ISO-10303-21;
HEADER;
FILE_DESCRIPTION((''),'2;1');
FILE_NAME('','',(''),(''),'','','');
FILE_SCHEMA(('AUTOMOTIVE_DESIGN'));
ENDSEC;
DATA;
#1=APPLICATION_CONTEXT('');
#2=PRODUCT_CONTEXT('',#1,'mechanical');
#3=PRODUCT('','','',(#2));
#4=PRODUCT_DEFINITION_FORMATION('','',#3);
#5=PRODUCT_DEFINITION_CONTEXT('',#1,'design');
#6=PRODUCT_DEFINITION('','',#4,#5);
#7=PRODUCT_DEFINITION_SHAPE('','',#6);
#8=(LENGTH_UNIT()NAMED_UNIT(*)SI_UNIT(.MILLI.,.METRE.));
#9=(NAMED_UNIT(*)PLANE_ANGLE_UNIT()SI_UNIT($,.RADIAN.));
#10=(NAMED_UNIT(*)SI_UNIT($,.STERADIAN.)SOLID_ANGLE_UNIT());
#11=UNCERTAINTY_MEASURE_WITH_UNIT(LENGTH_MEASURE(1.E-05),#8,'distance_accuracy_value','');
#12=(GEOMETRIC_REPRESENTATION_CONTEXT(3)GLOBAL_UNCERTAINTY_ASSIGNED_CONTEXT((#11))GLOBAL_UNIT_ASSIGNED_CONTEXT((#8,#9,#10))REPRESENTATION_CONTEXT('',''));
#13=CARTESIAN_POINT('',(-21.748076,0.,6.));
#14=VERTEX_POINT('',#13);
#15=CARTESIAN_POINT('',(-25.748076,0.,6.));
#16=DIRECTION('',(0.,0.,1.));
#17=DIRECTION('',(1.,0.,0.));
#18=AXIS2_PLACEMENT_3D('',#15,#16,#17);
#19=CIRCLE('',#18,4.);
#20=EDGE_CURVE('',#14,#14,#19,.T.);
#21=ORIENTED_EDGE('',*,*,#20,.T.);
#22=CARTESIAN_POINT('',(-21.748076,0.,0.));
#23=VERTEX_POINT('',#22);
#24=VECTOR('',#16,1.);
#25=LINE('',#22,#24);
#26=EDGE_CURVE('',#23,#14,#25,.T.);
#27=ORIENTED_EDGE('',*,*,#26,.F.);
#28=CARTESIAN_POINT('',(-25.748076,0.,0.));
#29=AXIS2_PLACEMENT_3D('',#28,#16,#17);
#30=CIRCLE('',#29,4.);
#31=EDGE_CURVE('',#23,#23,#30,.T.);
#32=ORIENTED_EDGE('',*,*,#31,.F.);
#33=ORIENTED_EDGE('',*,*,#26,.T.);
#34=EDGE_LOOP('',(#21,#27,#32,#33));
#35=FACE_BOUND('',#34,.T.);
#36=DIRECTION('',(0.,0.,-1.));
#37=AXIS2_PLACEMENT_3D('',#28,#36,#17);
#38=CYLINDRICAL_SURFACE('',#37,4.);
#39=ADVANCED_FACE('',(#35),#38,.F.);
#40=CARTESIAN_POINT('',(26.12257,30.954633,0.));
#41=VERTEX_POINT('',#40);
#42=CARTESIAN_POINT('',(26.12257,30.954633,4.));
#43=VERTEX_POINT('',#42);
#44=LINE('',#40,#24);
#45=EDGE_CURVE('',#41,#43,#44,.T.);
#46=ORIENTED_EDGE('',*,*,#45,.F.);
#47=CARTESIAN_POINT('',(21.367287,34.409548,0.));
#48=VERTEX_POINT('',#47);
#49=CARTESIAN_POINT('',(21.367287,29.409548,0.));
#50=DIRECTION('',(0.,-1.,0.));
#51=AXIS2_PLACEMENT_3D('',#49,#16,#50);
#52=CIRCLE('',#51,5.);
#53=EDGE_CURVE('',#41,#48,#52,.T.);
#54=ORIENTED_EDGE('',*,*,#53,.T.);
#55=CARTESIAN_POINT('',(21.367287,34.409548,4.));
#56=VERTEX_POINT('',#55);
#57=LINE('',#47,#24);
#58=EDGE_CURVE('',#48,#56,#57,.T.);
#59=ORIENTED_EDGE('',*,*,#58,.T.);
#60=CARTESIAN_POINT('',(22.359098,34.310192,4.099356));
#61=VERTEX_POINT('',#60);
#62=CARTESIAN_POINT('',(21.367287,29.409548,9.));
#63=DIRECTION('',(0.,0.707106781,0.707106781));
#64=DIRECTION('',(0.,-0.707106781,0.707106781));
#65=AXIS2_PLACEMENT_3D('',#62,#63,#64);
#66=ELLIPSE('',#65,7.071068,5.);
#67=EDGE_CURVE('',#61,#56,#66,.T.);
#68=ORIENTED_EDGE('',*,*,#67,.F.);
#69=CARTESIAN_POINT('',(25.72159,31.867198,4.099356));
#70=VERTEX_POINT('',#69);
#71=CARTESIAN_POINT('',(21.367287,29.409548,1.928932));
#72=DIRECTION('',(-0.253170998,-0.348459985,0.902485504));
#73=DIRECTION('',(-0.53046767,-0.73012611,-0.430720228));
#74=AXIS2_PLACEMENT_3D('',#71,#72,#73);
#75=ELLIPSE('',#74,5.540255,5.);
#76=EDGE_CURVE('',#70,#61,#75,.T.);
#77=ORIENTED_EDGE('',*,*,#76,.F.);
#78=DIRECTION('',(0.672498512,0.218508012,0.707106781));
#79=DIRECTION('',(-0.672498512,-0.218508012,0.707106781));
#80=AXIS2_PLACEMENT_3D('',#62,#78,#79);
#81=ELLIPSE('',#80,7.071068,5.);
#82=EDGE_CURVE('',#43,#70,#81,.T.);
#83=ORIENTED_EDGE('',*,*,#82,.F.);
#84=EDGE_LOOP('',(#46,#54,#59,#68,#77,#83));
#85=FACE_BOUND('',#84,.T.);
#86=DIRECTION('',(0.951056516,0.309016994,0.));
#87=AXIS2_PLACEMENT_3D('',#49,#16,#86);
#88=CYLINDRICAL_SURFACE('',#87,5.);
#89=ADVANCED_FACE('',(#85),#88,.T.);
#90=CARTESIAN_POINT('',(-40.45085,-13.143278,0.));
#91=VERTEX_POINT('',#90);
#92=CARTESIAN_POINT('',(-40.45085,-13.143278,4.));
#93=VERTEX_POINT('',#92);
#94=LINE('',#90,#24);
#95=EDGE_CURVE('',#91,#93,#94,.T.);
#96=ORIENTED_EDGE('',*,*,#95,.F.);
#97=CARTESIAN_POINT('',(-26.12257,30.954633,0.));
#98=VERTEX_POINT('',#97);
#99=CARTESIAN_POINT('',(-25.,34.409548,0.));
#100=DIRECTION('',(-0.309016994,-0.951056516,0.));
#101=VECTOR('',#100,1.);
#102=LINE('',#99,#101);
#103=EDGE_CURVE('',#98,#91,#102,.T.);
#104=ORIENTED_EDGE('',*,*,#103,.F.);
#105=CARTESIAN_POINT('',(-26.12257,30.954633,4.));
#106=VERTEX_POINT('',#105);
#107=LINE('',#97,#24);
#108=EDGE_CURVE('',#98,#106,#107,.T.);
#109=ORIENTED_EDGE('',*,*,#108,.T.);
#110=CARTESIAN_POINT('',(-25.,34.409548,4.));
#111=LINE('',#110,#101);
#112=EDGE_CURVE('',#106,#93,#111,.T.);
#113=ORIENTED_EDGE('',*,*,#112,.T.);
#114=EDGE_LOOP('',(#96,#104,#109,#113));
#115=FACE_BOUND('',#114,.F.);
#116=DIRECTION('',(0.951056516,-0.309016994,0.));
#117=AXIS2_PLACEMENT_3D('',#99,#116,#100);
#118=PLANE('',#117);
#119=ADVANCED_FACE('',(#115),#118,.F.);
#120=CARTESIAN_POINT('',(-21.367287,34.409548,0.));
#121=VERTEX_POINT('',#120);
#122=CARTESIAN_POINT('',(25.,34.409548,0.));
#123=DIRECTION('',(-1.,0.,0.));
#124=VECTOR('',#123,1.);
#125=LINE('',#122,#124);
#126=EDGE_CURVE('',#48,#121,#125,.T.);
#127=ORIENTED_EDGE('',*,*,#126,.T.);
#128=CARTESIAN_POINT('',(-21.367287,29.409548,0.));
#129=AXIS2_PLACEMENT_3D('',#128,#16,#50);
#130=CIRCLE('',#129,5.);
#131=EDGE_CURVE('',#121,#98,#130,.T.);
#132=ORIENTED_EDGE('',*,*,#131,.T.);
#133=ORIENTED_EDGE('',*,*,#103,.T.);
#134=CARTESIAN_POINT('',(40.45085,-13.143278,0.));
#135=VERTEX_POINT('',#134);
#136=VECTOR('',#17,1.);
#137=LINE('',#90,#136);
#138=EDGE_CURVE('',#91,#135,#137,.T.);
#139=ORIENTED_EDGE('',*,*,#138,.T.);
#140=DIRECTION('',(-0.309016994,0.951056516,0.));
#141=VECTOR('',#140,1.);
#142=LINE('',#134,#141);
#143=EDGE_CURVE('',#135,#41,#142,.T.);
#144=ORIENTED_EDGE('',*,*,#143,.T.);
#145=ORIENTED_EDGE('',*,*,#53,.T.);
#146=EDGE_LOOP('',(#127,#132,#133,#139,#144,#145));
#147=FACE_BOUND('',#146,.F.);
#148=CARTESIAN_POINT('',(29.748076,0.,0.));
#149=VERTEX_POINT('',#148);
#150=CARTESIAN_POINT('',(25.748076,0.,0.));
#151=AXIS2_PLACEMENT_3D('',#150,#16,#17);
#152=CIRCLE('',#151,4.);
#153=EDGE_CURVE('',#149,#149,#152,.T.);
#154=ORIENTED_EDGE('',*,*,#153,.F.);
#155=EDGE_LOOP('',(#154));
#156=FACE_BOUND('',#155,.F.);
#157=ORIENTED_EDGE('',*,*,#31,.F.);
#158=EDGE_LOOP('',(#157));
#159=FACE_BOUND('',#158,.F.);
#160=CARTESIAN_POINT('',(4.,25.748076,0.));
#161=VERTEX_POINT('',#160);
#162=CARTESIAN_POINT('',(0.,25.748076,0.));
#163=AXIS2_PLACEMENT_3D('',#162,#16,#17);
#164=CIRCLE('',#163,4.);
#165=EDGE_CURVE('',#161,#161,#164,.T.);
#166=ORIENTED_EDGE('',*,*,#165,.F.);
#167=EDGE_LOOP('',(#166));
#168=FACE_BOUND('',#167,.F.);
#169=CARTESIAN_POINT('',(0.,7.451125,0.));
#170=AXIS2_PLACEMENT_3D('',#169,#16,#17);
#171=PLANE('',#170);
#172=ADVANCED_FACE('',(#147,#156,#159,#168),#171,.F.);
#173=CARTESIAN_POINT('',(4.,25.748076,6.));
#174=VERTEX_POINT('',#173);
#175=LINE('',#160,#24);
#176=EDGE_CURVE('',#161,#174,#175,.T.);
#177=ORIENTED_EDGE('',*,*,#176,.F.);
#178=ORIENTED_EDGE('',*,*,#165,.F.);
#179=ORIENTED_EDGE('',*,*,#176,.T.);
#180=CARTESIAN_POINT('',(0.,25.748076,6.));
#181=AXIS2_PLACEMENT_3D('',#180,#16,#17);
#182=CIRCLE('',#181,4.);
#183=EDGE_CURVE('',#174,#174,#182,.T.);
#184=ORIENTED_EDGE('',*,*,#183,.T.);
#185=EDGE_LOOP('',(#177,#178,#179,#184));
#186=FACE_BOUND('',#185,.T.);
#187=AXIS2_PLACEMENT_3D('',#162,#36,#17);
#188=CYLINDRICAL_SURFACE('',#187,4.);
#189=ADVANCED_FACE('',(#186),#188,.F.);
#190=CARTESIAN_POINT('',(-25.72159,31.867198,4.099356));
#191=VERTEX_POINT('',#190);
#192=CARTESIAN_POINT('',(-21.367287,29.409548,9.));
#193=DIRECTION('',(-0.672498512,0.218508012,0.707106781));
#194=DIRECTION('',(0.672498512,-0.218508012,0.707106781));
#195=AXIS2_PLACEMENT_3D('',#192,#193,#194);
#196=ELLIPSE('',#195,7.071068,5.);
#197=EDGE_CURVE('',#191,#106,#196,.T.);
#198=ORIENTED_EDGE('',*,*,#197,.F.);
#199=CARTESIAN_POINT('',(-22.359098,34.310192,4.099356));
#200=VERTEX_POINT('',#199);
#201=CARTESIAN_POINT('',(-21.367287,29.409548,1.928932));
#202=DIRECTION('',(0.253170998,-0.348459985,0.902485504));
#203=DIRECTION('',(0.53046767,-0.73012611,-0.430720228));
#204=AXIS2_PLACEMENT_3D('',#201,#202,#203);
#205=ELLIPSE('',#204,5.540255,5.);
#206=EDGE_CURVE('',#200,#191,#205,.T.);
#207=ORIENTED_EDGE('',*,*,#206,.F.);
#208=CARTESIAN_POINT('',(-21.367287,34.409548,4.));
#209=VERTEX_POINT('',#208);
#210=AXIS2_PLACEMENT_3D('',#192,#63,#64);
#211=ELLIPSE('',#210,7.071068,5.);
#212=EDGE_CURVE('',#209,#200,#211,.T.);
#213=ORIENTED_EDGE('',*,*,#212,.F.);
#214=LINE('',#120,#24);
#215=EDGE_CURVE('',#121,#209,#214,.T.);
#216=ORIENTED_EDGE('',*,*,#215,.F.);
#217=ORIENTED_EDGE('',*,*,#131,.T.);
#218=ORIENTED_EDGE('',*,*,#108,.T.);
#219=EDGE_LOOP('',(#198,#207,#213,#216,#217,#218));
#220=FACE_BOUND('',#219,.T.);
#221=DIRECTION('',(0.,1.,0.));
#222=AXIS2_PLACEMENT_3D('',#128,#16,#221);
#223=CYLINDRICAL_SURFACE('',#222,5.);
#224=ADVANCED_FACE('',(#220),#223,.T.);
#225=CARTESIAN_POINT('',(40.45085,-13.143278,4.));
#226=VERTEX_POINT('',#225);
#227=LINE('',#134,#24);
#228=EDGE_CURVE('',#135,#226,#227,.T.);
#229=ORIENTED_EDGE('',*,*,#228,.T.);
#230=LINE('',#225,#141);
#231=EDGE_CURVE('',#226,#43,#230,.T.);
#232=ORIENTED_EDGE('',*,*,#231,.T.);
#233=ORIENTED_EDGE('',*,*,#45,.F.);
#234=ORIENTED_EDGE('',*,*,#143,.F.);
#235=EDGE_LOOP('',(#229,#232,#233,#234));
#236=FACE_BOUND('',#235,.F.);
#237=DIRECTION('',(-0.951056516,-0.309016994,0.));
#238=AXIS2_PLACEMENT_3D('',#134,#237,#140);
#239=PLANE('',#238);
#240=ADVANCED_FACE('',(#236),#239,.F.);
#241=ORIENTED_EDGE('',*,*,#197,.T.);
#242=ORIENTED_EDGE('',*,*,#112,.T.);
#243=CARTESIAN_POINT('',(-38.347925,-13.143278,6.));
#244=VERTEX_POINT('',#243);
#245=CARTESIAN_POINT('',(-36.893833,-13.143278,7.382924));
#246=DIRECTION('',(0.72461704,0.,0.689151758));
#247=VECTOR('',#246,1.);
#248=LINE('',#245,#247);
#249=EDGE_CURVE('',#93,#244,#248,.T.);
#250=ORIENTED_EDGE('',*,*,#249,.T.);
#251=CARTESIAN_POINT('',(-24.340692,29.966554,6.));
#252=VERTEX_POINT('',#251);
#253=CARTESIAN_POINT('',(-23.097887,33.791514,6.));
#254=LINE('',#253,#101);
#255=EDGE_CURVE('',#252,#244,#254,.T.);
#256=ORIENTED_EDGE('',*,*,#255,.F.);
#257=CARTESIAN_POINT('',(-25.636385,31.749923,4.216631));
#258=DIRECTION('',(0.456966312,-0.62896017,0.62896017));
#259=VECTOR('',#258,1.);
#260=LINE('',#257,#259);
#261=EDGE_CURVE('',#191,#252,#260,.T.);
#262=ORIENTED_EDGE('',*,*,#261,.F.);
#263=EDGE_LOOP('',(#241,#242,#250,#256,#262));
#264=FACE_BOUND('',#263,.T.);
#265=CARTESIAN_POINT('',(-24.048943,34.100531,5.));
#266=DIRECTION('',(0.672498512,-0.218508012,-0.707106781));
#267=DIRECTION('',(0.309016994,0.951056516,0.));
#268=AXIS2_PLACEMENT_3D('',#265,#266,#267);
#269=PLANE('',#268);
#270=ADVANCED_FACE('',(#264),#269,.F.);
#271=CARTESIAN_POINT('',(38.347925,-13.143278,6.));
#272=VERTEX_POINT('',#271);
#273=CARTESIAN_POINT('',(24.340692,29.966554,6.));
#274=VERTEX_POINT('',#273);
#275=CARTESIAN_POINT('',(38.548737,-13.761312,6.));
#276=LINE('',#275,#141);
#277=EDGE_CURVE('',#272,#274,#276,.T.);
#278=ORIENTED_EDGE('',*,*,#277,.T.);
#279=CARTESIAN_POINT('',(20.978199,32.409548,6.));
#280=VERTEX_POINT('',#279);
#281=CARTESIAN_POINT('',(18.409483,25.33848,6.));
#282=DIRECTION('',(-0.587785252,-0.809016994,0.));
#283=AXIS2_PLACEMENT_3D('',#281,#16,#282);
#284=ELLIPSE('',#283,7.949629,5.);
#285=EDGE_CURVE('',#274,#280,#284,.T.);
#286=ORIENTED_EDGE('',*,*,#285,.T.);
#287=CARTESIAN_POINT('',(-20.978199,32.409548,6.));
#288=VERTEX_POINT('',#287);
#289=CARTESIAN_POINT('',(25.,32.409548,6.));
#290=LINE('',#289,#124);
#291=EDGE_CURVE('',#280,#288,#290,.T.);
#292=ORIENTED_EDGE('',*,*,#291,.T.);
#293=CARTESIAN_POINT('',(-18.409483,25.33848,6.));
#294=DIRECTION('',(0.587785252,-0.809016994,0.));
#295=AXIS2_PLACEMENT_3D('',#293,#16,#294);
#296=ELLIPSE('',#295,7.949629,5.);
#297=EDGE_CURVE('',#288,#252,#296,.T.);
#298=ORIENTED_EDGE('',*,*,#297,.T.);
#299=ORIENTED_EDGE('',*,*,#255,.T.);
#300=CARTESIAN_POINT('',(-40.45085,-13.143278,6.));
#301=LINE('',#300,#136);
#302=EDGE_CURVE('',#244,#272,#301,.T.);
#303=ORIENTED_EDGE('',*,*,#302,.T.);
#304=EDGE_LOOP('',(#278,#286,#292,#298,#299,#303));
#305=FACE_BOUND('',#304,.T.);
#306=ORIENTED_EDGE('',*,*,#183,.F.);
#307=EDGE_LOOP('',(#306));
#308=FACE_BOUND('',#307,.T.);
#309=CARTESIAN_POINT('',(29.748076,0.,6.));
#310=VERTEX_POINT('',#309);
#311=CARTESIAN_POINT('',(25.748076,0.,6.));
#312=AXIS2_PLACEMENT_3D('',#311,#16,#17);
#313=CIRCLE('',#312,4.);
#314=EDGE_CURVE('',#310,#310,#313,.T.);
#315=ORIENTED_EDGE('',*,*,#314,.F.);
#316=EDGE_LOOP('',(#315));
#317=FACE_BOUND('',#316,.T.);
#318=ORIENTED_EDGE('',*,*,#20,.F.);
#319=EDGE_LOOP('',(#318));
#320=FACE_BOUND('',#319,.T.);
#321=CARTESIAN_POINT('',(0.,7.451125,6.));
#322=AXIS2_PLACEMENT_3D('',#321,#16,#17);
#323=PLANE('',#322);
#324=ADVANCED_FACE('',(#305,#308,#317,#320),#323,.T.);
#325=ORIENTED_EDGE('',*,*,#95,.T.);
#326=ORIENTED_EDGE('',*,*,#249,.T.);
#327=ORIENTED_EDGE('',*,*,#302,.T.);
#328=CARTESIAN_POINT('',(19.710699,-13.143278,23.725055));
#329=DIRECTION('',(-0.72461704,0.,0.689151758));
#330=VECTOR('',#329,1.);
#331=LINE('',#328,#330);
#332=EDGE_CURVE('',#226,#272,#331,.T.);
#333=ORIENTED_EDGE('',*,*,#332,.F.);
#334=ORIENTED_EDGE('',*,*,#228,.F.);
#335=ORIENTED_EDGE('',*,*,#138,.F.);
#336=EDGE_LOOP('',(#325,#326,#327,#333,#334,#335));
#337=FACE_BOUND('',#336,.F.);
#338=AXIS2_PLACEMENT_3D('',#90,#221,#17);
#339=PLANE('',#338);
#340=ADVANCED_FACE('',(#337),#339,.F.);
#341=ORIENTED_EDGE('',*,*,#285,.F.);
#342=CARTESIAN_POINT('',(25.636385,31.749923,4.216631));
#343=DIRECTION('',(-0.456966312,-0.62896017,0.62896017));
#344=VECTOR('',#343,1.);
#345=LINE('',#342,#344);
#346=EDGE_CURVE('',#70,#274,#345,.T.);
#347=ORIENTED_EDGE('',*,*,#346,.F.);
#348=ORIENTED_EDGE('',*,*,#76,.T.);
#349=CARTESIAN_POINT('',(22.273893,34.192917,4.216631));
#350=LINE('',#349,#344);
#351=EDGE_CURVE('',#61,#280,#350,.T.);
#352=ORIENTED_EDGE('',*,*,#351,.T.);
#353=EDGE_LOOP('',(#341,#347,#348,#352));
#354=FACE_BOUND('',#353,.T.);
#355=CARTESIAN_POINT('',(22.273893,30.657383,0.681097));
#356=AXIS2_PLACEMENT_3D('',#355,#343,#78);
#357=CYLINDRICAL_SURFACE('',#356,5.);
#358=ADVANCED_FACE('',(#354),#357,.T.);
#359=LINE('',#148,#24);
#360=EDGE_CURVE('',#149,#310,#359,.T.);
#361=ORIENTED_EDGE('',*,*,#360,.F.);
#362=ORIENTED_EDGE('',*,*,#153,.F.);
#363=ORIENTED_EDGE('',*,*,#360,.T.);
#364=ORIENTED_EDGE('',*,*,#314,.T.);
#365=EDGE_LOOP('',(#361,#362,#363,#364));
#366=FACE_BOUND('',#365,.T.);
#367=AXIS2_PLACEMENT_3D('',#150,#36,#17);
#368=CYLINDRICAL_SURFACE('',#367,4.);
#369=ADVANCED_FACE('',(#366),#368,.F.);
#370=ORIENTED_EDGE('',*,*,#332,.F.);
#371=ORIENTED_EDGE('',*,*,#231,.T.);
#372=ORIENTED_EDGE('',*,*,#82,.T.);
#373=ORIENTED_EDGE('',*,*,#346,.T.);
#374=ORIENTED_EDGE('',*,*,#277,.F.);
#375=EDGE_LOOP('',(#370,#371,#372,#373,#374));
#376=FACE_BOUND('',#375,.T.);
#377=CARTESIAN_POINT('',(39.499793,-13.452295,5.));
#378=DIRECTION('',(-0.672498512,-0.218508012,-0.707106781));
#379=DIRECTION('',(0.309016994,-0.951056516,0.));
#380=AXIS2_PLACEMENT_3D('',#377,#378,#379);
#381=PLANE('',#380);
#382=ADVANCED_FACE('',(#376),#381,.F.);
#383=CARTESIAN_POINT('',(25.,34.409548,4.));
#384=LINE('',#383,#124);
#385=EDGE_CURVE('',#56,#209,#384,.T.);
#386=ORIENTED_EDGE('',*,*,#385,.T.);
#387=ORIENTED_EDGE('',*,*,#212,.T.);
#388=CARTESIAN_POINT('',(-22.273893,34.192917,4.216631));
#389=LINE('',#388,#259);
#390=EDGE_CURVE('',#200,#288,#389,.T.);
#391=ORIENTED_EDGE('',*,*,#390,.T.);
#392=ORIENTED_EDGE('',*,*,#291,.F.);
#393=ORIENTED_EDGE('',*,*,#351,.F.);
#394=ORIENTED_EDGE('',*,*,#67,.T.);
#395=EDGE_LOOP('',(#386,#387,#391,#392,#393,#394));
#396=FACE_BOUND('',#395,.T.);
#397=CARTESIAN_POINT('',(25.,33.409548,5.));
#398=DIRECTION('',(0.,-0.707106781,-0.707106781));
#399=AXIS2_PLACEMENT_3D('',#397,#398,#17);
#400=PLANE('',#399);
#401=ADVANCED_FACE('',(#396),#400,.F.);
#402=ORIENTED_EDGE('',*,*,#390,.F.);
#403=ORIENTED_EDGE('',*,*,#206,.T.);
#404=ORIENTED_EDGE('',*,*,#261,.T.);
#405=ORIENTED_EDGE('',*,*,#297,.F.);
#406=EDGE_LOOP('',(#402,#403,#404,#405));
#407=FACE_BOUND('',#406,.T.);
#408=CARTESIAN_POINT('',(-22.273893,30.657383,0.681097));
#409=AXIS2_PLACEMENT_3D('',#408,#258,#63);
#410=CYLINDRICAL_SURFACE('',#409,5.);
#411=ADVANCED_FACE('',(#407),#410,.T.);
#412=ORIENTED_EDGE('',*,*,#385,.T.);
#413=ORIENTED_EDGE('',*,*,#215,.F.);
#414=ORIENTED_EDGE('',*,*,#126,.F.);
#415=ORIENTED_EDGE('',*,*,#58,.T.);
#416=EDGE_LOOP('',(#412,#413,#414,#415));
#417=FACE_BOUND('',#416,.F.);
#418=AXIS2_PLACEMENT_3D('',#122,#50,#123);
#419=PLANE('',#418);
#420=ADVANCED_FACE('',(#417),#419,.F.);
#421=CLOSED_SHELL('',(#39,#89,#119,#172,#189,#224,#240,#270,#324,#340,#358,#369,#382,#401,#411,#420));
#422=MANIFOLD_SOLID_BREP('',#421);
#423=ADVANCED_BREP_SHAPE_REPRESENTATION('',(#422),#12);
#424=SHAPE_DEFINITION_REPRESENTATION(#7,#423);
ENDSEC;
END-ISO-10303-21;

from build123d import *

# Parameters (mm, degrees)
F0_R     = 4
F1_DEPTH = 6
F2_SIZE  = 2
F3_F1_R  = 5
F3_F2_R  = 5
F3_F3_R  = 5
F3_F4_R  = 5


with BuildPart() as f1:
    # F0 (on Top) → F1 (new body)
    with BuildSketch(Plane.XY):
        Polygon((40.4508497187, -13.143277803), (25, 34.4095480118), (-25, 34.4095480118), (-40.4508497187, -13.143277803), align=None)
        with Locations((-25.7480759174, 0)):
            Circle(F0_R, mode=Mode.SUBTRACT)
        with Locations((25.7480759174, 0)):
            Circle(F0_R, mode=Mode.SUBTRACT)
        with Locations((0, 25.7480759174)):
            Circle(F0_R, mode=Mode.SUBTRACT)
    extrude(amount=F1_DEPTH)

    # F2
    f2_edges = [f1.edges().sort_by_distance(p)[0] for p in [
        (0, 34.409548, 6),
        (32.725425, 10.633135, 6),
        (-32.725425, 10.633135, 6),
    ]]
    chamfer(f2_edges, length=F2_SIZE)

    # F3: fillet of radius 5 on 4 edges, made by hand

    # F3_f1
    f3_f1_edges = [f1.edges().sort_by_distance(p)[0] for p in [
        (25, 34.4095480118, 2),
    ]]
    fillet(f3_f1_edges, radius=F3_F1_R)

    # F3_f2
    f3_f2_edges = [f1.edges().sort_by_distance(p)[0] for p in [
        (23.9265642827, 32.9320904977, 5.4774575141),
    ]]
    fillet(f3_f2_edges, radius=F3_F2_R)

    # F3_f3
    f3_f3_edges = [f1.edges().sort_by_distance(p)[0] for p in [
        (-25, 34.4095480118, 2),
    ]]
    fillet(f3_f3_edges, radius=F3_F3_R)

    # F3_f4
    f3_f4_edges = [f1.edges().sort_by_distance(p)[0] for p in [
        (-23.9265642827, 32.9320904977, 5.4774575141),
    ]]
    fillet(f3_f4_edges, radius=F3_F4_R)


solid = f1.part
